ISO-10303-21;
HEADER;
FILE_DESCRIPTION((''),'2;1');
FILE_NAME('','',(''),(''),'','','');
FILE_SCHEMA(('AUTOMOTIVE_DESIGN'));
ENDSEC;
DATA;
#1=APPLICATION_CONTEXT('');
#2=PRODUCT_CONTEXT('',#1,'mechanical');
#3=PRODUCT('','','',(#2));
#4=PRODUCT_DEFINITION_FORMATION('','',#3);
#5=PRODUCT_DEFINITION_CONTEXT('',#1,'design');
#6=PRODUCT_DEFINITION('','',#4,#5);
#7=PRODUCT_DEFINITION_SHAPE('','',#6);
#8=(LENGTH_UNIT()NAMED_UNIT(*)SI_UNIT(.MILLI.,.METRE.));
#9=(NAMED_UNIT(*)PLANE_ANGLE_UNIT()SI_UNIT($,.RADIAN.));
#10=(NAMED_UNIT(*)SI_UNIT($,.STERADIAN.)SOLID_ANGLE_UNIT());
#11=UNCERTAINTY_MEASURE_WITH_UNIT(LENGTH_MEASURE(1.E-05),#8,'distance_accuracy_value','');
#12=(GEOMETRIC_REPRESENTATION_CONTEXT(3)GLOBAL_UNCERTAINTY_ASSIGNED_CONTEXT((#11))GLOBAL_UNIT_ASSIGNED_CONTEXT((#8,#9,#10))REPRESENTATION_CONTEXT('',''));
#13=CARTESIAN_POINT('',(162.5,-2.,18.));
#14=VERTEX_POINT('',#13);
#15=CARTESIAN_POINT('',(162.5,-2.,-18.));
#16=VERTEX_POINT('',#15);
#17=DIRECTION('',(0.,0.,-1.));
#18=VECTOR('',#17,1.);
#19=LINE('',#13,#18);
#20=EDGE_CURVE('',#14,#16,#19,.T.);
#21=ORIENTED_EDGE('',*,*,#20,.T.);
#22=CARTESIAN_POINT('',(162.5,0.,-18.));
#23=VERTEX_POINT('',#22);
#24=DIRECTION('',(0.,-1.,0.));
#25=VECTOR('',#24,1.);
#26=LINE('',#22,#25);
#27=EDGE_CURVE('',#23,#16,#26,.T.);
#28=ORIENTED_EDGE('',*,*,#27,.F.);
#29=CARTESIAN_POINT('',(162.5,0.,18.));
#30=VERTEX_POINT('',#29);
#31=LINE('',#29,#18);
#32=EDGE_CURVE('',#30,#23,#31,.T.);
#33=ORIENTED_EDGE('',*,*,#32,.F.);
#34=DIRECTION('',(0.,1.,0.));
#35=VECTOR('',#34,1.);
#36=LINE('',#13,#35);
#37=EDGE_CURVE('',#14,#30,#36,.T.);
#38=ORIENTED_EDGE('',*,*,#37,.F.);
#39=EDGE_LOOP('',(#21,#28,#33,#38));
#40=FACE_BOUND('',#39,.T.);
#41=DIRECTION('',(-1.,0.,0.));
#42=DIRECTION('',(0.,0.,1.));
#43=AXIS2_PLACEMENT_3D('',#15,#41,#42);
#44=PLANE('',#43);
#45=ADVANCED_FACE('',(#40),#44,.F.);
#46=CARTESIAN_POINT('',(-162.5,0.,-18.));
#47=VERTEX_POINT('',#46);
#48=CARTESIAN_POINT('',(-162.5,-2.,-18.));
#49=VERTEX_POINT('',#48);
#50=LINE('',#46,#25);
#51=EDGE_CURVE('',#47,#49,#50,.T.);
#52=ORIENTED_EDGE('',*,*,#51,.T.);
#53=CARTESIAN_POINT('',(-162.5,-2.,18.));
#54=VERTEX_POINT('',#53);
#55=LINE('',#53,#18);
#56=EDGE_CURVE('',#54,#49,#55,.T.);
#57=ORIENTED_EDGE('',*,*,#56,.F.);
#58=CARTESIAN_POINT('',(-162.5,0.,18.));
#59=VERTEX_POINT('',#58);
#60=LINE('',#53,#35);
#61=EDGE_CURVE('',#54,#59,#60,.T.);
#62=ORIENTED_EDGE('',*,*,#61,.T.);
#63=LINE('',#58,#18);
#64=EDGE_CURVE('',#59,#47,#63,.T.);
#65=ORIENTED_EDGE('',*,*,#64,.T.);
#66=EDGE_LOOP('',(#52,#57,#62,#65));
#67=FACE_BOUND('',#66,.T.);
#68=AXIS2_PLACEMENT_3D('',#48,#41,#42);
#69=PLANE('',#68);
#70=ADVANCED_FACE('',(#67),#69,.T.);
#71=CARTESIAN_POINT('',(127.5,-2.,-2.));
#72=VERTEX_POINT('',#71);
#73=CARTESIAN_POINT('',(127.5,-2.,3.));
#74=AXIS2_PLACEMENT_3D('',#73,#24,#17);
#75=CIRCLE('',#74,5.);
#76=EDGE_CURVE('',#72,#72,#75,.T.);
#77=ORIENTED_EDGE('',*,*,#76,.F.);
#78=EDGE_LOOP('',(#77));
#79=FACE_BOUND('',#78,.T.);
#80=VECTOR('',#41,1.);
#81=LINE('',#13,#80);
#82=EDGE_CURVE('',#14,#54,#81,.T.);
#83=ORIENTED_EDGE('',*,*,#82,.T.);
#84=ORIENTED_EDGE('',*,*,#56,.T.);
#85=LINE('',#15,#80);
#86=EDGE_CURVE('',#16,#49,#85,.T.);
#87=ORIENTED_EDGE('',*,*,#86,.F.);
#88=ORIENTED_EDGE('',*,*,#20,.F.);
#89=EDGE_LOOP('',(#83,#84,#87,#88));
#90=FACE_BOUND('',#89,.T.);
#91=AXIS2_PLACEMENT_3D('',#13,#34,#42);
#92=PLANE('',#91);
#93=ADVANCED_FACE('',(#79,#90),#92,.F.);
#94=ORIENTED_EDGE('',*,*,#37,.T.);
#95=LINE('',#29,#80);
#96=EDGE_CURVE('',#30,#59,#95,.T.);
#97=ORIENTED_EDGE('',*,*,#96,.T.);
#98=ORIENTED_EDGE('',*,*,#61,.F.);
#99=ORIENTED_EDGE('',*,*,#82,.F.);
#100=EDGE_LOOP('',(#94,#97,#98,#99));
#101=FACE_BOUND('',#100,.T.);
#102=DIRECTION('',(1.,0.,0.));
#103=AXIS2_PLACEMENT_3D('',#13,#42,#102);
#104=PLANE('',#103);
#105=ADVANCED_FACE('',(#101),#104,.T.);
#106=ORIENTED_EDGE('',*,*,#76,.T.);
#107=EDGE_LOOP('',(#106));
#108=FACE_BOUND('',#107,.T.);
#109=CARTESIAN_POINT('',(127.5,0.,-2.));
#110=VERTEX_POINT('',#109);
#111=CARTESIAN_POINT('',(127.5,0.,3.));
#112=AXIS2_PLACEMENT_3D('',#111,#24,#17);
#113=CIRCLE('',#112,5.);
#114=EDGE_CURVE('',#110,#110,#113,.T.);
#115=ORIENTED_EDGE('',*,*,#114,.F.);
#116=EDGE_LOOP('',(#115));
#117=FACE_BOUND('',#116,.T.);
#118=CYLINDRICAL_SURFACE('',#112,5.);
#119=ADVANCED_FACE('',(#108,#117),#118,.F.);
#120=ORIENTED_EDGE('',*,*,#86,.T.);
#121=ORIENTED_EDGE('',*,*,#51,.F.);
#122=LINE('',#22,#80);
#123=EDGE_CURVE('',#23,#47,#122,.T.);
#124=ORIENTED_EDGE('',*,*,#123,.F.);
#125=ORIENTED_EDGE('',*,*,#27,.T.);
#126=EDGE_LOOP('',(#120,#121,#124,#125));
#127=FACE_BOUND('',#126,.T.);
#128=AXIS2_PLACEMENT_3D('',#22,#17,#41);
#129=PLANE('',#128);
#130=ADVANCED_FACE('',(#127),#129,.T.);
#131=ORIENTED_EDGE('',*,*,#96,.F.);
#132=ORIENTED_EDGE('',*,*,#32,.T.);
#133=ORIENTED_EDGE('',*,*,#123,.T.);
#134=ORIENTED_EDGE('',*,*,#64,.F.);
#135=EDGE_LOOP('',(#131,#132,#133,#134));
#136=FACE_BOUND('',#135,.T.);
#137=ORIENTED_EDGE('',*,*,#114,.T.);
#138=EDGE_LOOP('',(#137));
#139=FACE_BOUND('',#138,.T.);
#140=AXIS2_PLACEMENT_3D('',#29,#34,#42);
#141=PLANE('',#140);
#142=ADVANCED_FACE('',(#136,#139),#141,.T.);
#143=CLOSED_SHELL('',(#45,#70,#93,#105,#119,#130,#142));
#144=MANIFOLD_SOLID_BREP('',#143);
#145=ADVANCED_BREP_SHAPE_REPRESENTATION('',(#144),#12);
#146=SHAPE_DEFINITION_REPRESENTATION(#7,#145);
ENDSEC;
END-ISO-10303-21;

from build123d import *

# Parameters (mm, degrees)
ESBO_O1_W             = 36
ESBO_O1_H             = 2
FLANGE_BASE2_DEPTH    = 162.5
ESBO_O13_R            = 5
CORTE_EXTRUS_O4_DEPTH = 164.506116094


# Sheet-metal steps are written as plain solids
with BuildPart() as part:
    # Esboço1 → Flange-base2 (new, symmetric)
    with BuildSketch(Plane(origin=(0, 0, 0), x_dir=(0, 0, -1), z_dir=(1, 0, 0))):
        with Locations((0, -1)):
            Rectangle(ESBO_O1_W, ESBO_O1_H)
    extrude(amount=FLANGE_BASE2_DEPTH, both=True)

    # Esboço13 → Corte-extrusão4 (cut, through all)
    with BuildSketch(Plane.XZ.offset(2)):
        with Locations(Location((127.5, 3, 0), (0, 0, 270))):
            Circle(ESBO_O13_R)
    extrude(amount=-CORTE_EXTRUS_O4_DEPTH, mode=Mode.SUBTRACT)


solid = part.part
